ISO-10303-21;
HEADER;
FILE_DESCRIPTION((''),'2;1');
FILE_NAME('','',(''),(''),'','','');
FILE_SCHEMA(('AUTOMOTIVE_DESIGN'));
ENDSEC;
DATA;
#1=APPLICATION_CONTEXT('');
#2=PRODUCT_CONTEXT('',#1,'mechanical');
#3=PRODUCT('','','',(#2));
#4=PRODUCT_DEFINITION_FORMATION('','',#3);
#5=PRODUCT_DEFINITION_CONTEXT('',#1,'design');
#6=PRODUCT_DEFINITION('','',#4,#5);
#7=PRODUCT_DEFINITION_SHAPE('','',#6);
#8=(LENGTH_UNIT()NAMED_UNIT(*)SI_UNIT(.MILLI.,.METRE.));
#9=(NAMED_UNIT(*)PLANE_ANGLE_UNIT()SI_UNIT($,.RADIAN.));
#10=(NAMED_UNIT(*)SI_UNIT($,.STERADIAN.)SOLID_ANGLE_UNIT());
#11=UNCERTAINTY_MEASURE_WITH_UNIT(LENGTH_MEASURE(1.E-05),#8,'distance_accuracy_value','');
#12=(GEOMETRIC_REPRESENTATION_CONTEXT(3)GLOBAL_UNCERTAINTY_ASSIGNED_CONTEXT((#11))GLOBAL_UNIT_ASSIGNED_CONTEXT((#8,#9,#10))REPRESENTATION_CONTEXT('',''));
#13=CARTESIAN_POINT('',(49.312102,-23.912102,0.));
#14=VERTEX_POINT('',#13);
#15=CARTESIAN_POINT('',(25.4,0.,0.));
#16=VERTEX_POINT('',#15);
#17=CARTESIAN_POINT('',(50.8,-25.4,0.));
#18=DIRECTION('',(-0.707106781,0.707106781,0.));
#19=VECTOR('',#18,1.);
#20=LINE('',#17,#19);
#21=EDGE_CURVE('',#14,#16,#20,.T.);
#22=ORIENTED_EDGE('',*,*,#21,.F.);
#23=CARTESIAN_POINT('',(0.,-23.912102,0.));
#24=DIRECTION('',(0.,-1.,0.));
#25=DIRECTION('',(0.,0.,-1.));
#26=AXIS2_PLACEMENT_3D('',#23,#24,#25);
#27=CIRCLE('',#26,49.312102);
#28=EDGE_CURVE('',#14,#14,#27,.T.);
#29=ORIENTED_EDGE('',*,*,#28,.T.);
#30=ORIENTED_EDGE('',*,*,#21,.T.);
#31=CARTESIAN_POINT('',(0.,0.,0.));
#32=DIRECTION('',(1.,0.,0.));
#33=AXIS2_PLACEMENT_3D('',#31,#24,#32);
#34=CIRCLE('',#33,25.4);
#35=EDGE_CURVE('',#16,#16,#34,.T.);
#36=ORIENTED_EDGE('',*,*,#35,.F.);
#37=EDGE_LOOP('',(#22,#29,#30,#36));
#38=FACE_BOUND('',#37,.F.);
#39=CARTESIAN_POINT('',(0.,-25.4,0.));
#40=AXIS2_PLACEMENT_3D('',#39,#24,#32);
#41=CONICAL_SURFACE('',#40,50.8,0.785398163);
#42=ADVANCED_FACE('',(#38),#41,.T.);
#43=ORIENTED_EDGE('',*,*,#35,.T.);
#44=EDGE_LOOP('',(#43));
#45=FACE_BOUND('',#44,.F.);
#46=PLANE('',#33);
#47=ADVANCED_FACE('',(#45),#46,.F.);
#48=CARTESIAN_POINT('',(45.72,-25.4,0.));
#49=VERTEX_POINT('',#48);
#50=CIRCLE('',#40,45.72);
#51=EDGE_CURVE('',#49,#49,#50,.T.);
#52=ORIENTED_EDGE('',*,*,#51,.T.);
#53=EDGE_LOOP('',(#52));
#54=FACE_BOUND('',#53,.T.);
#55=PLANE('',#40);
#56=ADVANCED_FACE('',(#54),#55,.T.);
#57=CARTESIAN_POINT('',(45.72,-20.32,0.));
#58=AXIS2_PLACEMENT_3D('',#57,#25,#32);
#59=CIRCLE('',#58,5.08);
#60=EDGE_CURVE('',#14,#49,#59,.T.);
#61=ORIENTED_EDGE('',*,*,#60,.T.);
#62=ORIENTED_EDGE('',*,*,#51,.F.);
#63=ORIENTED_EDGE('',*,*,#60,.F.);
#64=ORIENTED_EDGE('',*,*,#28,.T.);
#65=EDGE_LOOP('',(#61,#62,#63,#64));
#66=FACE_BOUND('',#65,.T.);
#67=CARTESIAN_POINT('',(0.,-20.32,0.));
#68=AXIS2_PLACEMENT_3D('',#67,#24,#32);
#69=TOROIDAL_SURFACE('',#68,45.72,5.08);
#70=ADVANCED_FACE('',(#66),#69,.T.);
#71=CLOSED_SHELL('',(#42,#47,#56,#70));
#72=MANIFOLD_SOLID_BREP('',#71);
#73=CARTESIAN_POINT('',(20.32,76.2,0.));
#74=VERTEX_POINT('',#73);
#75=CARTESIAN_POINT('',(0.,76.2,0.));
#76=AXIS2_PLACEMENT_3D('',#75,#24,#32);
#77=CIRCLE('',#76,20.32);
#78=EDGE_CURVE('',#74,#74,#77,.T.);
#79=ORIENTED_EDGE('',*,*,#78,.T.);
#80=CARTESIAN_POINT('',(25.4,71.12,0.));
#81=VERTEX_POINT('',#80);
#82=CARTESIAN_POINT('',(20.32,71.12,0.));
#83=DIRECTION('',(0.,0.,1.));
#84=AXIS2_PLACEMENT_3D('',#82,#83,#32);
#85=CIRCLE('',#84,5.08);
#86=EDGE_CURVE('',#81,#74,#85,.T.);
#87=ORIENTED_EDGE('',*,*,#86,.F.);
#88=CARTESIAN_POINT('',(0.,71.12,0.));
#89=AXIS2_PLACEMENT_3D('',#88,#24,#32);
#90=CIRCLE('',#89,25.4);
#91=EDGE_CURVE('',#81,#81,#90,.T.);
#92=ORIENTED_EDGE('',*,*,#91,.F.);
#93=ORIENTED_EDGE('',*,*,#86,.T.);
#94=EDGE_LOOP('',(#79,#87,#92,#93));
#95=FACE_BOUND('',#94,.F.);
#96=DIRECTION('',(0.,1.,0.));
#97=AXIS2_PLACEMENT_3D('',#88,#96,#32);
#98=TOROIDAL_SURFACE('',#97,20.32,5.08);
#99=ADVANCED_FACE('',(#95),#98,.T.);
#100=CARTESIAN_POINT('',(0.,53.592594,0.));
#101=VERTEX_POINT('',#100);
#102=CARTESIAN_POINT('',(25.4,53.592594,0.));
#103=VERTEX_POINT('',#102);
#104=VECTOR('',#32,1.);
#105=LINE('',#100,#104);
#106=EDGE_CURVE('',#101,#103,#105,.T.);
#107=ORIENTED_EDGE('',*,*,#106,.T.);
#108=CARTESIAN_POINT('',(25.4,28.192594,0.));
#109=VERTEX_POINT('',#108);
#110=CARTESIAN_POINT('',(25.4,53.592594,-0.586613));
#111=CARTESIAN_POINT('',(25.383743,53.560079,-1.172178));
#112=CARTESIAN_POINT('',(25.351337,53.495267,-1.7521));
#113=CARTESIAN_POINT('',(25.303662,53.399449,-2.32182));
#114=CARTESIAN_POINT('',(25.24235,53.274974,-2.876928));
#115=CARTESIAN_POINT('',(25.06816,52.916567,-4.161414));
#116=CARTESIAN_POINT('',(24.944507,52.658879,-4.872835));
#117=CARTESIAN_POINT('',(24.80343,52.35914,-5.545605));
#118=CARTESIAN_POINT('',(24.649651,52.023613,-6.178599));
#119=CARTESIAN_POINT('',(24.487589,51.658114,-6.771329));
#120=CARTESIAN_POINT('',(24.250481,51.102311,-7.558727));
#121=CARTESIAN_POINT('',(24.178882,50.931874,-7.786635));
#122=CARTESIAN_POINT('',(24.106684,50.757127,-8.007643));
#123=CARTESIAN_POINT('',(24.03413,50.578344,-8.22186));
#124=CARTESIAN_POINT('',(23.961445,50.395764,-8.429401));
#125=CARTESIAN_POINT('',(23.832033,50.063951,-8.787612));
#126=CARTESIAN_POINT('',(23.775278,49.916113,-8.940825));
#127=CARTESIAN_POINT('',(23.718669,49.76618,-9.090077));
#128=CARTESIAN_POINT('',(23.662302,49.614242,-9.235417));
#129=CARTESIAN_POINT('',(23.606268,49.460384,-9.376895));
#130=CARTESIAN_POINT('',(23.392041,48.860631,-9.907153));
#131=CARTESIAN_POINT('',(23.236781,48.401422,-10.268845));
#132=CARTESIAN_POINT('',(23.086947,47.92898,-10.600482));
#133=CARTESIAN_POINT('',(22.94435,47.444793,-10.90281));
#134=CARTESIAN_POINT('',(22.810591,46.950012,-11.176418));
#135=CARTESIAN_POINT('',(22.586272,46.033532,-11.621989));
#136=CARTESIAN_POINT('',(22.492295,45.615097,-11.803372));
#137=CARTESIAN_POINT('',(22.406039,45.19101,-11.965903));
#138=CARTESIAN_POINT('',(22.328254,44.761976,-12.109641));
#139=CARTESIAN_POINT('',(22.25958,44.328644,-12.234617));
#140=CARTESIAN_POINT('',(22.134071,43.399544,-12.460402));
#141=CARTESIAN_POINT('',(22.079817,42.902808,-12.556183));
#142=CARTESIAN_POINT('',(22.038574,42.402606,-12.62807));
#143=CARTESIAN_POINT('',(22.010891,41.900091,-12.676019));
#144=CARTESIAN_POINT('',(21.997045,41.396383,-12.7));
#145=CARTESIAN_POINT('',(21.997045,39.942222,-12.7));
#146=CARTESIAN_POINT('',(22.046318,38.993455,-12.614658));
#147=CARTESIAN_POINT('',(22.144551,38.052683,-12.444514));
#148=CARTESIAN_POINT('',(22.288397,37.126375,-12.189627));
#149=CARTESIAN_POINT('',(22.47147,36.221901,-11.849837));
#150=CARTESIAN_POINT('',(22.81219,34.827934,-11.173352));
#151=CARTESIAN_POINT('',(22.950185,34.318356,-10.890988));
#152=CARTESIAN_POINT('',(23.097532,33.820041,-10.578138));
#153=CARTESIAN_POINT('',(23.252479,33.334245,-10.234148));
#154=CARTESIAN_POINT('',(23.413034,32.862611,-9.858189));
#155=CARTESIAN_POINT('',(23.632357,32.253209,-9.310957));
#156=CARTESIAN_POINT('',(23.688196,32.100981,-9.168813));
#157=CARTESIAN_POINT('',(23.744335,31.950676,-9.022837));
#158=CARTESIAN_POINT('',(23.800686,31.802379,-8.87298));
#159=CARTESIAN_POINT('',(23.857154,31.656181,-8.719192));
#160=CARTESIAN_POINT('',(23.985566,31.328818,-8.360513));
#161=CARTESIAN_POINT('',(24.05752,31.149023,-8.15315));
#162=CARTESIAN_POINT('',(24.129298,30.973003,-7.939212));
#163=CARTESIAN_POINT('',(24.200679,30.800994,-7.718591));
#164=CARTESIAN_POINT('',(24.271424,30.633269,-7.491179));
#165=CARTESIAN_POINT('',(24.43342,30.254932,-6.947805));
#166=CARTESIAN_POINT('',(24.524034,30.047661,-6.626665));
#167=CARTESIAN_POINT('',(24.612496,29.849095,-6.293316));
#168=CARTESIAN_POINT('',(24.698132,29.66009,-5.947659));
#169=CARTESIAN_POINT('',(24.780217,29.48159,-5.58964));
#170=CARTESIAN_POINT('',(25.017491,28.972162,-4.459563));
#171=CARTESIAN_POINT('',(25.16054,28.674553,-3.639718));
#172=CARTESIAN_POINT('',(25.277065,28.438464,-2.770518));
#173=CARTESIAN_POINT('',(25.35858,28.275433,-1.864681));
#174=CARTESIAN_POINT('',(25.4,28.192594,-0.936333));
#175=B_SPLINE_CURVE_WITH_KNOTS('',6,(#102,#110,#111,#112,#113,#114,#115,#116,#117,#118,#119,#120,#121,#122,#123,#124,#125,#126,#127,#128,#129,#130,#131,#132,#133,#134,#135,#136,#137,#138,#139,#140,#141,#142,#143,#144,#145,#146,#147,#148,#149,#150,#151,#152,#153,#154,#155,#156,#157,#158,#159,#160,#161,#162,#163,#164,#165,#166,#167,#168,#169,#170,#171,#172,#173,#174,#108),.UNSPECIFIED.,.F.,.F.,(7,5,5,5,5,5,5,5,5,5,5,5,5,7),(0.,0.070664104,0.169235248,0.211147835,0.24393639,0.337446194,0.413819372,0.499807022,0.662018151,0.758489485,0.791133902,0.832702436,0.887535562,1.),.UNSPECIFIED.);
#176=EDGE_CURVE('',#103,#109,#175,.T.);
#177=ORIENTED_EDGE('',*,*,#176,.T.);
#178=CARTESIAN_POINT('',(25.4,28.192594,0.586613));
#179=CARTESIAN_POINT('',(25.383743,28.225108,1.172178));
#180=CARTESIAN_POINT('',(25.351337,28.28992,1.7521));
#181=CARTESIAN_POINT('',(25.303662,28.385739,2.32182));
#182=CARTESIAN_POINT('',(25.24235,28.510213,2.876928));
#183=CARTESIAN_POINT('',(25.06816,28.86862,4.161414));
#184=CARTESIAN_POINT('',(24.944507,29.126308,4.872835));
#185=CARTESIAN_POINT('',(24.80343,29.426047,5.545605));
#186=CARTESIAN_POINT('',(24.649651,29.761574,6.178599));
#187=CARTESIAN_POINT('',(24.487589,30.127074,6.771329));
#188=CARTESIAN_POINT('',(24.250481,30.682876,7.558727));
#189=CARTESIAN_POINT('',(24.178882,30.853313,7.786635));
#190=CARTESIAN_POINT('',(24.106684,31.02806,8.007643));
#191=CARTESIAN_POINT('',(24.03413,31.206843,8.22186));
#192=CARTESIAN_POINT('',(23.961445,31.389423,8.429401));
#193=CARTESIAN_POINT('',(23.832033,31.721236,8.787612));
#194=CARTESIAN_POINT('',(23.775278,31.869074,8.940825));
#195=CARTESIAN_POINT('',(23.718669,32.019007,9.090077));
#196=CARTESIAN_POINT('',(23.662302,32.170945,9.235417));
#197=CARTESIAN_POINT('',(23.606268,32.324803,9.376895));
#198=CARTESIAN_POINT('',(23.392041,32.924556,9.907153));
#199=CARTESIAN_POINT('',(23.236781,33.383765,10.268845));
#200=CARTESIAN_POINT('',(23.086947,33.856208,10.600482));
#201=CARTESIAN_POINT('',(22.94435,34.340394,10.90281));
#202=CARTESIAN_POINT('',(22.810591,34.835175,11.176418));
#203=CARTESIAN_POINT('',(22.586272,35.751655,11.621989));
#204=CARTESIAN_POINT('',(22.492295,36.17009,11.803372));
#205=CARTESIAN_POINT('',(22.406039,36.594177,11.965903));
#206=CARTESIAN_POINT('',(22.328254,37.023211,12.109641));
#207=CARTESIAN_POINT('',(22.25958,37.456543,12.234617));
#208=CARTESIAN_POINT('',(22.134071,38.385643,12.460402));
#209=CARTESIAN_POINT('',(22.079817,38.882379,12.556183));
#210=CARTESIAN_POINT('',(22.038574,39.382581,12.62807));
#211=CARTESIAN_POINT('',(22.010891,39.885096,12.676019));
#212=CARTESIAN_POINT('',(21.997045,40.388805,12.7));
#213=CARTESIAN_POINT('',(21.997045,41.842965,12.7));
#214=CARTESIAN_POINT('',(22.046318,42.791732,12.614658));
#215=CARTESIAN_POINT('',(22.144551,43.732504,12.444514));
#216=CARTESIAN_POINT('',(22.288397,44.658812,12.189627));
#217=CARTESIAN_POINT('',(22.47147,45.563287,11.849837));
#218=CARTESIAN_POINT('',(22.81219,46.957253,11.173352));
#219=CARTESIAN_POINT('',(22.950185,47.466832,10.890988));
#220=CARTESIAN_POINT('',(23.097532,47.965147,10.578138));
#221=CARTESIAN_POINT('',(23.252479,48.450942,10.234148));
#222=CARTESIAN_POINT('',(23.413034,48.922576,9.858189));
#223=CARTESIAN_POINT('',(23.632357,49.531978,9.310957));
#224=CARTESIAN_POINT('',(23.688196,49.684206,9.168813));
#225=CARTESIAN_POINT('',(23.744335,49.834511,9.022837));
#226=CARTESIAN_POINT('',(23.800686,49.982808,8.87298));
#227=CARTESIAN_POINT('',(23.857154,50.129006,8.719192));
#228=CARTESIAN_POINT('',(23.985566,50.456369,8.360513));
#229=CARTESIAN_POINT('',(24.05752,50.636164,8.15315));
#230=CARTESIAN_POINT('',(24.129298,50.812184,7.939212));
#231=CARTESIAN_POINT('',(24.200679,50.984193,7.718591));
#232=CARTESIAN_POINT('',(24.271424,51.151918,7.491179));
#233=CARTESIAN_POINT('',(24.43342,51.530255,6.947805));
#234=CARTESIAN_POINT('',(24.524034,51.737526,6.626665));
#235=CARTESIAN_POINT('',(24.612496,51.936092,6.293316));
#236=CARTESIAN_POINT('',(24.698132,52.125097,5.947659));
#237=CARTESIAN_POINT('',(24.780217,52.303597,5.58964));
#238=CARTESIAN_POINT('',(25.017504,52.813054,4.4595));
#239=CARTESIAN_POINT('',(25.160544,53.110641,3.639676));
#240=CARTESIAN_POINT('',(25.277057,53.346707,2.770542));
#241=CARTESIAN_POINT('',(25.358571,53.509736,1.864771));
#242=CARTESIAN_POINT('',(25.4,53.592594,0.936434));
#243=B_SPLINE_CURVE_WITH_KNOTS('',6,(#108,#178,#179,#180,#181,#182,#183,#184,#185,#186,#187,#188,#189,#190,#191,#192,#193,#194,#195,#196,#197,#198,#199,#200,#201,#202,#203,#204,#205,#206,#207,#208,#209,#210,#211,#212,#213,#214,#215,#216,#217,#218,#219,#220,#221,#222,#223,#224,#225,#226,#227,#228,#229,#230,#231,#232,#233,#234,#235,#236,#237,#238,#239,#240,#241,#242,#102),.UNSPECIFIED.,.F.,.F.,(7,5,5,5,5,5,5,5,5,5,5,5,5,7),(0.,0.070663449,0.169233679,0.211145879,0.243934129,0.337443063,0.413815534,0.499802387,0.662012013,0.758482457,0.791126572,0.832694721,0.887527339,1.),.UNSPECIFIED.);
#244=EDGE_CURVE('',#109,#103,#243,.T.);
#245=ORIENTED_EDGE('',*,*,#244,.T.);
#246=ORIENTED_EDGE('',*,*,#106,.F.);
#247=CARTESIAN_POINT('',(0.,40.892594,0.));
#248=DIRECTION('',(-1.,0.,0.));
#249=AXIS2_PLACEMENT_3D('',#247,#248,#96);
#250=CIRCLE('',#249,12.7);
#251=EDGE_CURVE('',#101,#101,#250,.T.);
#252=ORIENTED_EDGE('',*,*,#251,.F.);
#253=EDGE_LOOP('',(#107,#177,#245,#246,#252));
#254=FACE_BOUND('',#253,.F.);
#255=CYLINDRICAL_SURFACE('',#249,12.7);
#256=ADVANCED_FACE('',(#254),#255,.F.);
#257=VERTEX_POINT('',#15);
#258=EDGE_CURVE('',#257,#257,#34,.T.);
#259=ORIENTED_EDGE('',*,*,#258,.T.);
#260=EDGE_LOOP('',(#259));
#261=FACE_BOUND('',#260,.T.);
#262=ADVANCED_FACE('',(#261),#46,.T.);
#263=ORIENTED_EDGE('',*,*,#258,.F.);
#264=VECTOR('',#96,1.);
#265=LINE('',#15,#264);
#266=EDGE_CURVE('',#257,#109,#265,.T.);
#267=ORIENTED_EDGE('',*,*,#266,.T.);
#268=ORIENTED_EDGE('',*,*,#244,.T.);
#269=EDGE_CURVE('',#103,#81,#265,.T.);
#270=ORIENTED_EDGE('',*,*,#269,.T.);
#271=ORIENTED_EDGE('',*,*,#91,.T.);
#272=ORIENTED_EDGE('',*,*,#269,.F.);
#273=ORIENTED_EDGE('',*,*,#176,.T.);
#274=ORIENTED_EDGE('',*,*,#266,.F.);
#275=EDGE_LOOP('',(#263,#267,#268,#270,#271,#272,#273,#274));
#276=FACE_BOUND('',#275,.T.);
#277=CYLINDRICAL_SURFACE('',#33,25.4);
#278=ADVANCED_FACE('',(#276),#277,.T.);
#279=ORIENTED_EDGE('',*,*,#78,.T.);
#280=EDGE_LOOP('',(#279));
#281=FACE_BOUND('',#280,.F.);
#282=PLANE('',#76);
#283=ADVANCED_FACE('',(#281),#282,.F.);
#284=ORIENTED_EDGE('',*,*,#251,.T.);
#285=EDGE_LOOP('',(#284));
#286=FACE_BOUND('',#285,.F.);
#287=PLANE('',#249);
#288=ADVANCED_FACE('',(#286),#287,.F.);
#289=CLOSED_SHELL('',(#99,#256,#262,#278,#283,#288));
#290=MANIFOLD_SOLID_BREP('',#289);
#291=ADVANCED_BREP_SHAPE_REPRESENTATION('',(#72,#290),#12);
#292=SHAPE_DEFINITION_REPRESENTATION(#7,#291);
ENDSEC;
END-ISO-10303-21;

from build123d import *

# Parameters (mm, degrees)
F0_R     = 50.8
F1_DEPTH = 25.4
F2_R     = 5.08
F4_DEPTH = 76.2
F5_R     = 5.08
F7_D     = 25.4
F7_DEPTH = 25.401


# Not quite as in the source:
# - a fillet or chamfer that OpenCascade refuses, or shapes differently, is made with other operations: its cross-section is extruded or revolved along the edge and cut away or added


with BuildPart() as f1:
    # F0 (on Front) → F1 (new body)
    with BuildSketch(Plane.XZ):
        Circle(F0_R)
    extrude(amount=F1_DEPTH)

    # F2
    f2_edges = [f1.edges().sort_by_distance(p)[0] for p in [
        (-50.8, -25.4, 0),
    ]]
    fillet(f2_edges, radius=F2_R)

    # F3: chamfer of 25.4 on 1 edges, made by hand

    # F3_s1 → F3_t2 (revolve, cut)
    with BuildSketch(Plane.XY):
        Polygon((50.8, -25.4), (25.4, 0), (50.8, 0), align=None)
    revolve(axis=Axis((0, 0, 0), (0, -1, 0)), mode=Mode.SUBTRACT)


with BuildPart() as f4:
    # F4 (new): a face of the model
    f4_faces = [f1.part.faces().sort_by_distance(p)[0] for p in [
        (0, 0, 0),
    ]]
    extrude(f4_faces, amount=F4_DEPTH)

    # F5
    f5_edges = [f4.edges().sort_by_distance(p)[0] for p in [
        (-25.4, 76.2, 0),
    ]]
    fillet(f5_edges, radius=F5_R)

    # F7 (through all, one way)
    with BuildSketch(Plane(origin=(0, 0, 0), x_dir=(0, 1, 0), z_dir=(-1, 0, 0))):
        with Locations((40.8925935626, 0)):
            Circle(F7_D / 2)
    extrude(amount=-F7_DEPTH, mode=Mode.SUBTRACT)


solid = Compound([f1.part, f4.part])
